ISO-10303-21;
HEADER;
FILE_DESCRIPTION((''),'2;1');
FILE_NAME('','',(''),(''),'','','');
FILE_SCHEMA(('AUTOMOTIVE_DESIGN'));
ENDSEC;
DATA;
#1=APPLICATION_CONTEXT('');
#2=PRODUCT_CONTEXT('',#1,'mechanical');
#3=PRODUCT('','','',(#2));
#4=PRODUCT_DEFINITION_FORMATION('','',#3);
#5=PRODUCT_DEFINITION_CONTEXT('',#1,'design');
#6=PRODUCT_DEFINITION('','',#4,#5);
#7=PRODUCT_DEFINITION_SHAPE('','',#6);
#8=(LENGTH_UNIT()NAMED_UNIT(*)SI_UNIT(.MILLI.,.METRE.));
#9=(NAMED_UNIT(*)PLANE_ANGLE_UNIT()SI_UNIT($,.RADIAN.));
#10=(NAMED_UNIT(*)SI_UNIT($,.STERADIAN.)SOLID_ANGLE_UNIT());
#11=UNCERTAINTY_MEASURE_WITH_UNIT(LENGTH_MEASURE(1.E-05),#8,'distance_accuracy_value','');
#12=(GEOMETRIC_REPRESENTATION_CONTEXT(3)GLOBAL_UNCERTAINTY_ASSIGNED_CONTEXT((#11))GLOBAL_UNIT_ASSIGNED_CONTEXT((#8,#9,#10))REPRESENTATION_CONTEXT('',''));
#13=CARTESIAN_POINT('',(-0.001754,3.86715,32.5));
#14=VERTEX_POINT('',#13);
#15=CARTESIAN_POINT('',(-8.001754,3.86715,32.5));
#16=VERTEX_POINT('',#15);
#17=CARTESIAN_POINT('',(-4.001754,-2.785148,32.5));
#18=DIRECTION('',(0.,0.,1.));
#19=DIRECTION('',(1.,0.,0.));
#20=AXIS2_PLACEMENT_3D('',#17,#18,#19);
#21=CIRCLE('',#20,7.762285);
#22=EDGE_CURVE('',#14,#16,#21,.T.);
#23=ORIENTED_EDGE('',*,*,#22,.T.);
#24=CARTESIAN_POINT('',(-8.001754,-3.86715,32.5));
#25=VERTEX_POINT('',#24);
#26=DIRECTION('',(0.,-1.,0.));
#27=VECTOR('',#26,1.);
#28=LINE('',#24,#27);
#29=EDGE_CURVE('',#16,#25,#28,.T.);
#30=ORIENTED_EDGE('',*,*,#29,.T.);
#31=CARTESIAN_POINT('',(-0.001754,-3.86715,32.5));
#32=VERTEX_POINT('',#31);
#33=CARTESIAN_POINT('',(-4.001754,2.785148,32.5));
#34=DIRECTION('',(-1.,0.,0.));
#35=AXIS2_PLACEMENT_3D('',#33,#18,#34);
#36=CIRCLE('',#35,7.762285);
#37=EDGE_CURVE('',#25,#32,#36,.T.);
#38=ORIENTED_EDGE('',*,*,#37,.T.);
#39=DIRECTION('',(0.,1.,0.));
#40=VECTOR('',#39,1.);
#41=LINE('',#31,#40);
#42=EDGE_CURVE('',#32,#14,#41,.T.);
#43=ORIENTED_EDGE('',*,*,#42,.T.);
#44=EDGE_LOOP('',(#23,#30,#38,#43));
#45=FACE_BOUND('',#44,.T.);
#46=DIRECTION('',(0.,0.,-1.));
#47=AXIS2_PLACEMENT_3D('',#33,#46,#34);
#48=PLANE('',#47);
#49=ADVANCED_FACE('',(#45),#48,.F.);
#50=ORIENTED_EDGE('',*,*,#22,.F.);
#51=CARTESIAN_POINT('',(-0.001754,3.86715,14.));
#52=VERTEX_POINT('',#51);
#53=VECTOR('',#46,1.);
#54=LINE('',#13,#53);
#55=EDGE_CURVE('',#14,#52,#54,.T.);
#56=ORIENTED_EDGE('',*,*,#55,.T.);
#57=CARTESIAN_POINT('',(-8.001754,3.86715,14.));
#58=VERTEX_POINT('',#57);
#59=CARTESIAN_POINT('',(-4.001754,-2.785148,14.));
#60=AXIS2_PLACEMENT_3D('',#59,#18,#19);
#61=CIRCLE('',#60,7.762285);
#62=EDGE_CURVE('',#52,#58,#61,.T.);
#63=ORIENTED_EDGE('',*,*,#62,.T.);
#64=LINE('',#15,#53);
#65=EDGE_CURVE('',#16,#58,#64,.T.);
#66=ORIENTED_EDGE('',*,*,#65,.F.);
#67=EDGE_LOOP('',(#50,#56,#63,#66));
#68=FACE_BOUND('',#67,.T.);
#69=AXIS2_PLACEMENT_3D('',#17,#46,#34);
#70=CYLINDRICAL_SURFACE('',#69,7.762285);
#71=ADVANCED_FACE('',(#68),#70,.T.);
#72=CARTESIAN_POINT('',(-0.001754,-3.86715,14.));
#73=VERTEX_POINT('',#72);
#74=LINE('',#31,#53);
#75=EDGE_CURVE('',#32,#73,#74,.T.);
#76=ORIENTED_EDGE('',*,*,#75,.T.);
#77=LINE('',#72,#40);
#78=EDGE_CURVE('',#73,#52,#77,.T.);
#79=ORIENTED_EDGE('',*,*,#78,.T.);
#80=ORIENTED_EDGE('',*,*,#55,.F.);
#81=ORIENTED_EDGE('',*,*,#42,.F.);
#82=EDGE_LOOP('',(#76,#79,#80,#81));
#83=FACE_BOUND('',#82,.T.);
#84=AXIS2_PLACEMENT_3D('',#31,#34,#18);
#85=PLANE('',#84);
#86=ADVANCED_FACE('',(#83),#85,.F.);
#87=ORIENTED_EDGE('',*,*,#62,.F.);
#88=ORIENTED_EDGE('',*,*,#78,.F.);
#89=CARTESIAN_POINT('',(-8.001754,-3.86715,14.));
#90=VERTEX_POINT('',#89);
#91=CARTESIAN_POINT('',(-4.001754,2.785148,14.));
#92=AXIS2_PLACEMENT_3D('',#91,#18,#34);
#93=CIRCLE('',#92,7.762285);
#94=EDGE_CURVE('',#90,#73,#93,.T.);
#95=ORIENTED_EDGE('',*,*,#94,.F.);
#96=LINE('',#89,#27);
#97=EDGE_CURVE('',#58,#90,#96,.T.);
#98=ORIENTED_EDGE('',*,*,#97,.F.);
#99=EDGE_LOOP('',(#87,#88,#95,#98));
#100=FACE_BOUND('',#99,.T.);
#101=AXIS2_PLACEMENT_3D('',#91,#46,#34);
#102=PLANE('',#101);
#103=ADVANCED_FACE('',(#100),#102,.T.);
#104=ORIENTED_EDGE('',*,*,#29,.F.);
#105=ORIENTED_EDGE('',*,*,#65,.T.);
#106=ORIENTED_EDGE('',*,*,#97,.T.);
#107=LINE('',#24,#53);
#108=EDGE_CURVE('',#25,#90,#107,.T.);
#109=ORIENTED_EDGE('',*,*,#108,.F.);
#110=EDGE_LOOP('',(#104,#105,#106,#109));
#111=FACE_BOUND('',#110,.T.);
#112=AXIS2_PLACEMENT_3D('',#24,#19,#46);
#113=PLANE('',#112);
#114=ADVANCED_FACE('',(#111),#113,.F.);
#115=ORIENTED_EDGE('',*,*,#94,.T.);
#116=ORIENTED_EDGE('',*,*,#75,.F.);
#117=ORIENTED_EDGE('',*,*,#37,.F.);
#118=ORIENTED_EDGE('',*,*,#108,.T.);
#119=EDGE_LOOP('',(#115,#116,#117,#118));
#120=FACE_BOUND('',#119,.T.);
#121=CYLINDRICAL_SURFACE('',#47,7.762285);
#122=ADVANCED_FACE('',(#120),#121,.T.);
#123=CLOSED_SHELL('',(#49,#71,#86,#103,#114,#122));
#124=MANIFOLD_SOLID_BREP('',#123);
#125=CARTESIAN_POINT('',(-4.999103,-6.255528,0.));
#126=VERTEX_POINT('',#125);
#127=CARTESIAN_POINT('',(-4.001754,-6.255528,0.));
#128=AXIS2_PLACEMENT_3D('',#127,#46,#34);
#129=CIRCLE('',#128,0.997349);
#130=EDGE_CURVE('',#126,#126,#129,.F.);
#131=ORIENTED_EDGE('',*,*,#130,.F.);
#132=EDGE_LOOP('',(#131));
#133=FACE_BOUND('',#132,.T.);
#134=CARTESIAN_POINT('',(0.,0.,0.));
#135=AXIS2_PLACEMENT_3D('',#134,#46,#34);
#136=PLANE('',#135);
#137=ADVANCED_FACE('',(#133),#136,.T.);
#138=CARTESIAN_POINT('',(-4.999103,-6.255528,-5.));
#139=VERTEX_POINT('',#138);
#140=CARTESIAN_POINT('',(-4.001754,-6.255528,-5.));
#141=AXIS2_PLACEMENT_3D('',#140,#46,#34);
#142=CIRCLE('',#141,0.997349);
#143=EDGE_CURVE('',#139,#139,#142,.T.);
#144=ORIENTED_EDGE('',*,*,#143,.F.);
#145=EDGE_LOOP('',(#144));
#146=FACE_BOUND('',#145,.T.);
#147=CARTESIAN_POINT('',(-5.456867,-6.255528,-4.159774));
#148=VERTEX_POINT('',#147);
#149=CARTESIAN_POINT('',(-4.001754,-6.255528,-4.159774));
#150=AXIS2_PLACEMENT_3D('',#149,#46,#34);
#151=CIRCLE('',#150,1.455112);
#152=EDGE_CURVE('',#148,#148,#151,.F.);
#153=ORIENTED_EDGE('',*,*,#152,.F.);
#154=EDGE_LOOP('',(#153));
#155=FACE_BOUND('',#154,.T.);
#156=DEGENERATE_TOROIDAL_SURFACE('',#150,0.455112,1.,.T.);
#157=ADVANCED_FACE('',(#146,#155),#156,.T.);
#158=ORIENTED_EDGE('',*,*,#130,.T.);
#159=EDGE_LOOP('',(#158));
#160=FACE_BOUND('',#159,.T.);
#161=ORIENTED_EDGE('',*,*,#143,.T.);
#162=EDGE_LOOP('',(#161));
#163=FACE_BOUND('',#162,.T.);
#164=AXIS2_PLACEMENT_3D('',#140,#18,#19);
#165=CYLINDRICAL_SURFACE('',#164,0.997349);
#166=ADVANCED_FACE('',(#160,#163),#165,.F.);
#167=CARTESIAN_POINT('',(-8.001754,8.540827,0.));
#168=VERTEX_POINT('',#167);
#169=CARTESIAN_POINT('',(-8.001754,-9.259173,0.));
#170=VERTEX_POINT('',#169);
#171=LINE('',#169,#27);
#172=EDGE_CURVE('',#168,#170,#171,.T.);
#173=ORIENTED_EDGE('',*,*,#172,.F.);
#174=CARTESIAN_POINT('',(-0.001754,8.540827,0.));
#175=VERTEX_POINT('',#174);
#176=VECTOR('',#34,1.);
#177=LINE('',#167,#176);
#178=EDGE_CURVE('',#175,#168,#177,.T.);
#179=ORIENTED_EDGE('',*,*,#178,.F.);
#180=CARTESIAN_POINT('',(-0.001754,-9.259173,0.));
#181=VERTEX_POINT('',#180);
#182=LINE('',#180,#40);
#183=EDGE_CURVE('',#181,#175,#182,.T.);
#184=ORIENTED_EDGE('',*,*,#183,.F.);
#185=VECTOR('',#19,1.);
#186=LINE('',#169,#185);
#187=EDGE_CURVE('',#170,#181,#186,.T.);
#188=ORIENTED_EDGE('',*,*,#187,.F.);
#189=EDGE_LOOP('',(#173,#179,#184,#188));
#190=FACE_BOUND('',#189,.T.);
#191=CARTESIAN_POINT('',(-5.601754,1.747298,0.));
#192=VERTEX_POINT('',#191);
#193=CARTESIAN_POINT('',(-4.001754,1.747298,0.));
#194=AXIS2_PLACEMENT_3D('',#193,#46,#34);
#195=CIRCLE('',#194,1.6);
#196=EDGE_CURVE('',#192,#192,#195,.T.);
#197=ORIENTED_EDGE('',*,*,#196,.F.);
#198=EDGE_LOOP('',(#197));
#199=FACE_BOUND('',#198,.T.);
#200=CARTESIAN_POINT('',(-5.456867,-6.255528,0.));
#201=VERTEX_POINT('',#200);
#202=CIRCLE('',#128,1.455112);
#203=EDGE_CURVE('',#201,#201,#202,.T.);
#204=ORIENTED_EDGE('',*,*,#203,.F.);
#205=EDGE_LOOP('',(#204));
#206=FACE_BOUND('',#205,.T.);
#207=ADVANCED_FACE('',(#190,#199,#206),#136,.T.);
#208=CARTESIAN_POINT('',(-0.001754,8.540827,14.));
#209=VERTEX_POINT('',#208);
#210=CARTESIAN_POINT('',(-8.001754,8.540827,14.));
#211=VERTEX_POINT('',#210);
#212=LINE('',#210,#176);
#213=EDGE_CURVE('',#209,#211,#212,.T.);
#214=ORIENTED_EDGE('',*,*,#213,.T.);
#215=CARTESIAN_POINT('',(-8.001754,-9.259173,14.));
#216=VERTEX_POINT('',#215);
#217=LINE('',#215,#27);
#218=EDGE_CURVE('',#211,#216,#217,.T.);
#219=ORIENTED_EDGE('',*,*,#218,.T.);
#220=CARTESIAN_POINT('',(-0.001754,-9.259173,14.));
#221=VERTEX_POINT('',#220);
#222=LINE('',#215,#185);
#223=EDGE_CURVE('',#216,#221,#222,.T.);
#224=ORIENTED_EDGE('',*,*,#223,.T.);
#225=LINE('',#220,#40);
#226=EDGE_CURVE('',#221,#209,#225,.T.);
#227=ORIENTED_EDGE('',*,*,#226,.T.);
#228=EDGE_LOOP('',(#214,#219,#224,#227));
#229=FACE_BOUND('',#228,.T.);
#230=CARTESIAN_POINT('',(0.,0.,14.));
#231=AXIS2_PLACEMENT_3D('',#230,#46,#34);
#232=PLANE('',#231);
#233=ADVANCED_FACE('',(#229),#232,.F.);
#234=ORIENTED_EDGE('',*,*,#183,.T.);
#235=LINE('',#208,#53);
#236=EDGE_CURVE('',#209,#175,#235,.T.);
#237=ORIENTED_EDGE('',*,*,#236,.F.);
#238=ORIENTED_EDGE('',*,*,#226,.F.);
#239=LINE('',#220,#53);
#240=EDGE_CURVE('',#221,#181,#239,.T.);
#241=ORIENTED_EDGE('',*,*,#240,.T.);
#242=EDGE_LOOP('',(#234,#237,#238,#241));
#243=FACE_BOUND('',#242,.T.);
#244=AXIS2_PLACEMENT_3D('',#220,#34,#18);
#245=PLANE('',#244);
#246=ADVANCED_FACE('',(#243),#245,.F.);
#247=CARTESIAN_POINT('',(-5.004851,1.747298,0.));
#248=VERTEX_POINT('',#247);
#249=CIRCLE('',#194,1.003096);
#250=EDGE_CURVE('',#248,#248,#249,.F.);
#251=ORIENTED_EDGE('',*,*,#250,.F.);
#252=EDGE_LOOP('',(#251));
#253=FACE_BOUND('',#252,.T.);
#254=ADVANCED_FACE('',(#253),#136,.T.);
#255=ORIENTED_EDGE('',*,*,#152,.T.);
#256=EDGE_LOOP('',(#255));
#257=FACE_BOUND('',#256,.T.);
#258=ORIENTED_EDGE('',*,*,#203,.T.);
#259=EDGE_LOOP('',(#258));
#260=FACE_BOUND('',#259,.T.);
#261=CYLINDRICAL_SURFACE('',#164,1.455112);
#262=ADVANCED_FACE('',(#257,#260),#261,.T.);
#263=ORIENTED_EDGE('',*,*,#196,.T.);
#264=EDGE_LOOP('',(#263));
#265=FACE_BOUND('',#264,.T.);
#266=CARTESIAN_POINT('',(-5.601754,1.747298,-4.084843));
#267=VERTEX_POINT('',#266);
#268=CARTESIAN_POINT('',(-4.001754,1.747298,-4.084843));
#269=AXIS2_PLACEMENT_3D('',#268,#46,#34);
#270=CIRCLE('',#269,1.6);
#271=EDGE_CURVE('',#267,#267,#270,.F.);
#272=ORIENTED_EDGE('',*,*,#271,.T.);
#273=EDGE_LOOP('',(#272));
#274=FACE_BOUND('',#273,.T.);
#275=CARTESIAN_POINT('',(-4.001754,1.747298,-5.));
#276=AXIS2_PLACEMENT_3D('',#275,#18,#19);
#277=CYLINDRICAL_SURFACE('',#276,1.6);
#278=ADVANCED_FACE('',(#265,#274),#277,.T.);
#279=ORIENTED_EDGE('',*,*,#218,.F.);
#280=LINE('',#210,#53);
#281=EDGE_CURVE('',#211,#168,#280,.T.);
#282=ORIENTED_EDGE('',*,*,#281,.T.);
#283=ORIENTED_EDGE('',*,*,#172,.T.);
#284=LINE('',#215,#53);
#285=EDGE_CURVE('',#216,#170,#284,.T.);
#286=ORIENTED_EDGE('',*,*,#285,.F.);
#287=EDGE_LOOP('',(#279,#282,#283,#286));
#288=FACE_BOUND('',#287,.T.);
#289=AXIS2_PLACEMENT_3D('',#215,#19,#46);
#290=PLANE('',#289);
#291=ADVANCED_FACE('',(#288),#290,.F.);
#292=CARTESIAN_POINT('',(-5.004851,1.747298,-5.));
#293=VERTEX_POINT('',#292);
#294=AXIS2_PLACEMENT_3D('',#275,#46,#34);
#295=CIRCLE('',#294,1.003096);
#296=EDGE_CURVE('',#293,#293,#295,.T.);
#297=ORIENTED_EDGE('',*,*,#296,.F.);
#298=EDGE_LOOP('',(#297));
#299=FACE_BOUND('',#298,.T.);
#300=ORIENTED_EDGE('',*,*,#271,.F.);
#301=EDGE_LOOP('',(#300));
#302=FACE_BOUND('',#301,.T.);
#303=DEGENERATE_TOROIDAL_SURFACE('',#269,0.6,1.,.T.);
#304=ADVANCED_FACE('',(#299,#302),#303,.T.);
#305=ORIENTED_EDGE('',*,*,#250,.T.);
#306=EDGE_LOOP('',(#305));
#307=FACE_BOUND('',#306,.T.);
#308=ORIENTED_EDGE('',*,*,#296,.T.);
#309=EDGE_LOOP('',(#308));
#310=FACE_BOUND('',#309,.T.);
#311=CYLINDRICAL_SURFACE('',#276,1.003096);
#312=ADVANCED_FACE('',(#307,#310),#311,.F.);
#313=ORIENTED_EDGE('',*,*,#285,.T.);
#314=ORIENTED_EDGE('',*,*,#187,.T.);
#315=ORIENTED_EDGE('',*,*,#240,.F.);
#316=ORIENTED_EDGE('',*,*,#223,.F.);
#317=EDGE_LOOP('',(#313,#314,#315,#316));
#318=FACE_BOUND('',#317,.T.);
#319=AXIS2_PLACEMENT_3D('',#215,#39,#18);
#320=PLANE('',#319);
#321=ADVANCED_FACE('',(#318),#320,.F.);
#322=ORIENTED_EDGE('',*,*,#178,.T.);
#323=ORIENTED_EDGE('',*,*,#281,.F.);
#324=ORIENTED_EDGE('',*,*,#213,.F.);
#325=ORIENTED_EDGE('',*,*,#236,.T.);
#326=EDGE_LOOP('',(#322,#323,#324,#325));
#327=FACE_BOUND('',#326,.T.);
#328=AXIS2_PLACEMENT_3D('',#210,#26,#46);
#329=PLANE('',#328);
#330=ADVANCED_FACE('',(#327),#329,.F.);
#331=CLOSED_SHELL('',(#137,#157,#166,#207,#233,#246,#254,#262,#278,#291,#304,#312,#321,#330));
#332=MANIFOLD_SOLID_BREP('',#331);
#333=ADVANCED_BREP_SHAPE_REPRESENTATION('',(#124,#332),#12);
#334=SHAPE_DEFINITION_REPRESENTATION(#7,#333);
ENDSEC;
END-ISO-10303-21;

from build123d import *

# Parameters (mm, degrees)
SKETCH1_W           = 8
SKETCH1_H           = 17.8
BOSS_EXTRUDE1_DEPTH = 14
BOSS_EXTRUDE2_DEPTH = 18.5
SKETCH3_R           = 1.455112434
SKETCH3_R_2         = 0.997349366
SKETCH3_R_3         = 1.6
SKETCH3_R_4         = 1.003096482
BOSS_EXTRUDE3_DEPTH = 5
FILLET1_R           = 1


with BuildPart() as part:
    # Sketch1 → Boss-Extrude1 (new body)
    with BuildSketch(Plane.XY):
        with Locations((-4.001754105, -0.359172607)):
            Rectangle(SKETCH1_W, SKETCH1_H)
    extrude(amount=BOSS_EXTRUDE1_DEPTH)

    # Sketch3 → Boss-Extrude3 (add)
    # profile 1 of 2: a face of its own
    with BuildSketch(Plane(origin=(0, 0, 0), x_dir=(-1, 0, 0), z_dir=(0, 0, -1))):
        with Locations((4.001754105, -6.25552787)):
            Circle(SKETCH3_R)
        with Locations((4.001754105, -6.25552787)):
            Circle(SKETCH3_R_2, mode=Mode.SUBTRACT)
    # profile 2 of 2: a face of its own
    with BuildSketch(Plane(origin=(0, 0, 0), x_dir=(-1, 0, 0), z_dir=(0, 0, -1))):
        with Locations((4.001754105, 1.747298107)):
            Circle(SKETCH3_R_3)
        with Locations((4.001754105, 1.747298107)):
            Circle(SKETCH3_R_4, mode=Mode.SUBTRACT)
    extrude(amount=BOSS_EXTRUDE3_DEPTH)

    # Fillet1
    # the kernel refuses this fillet: 1 mm, written as the material it takes off along each edge
    with BuildSketch(Plane(origin=(-4.001754105, -6.25552787, -5), x_dir=(-1, 0, 0), z_dir=(0, -1, 0))) as fillet1_piece_1:
        with BuildLine():
            CenterArc((0.455112434, -0.84022563), FILLET1_R, 0, 57.163953249)
            Line((0.997349366, 0), (1.008194105, 0.016804513))
            ThreePointArc((1.008194105, 0.016804513), (1.2262309, 0.02), (1.455112434, 0.02))
            Line((1.455112434, 0.02), (1.475112434, 0))
            Line((1.475112434, 0), (1.475112434, -0.84022563))
            Line((1.475112434, -0.84022563), (1.455112434, -0.84022563))
        make_face()
    revolve(axis=Axis((-4.001754105, -6.25552787, -5), (0, 0, -1)), mode=Mode.SUBTRACT)
    with BuildSketch(Plane(origin=(-4.001754105, 1.747298107, -5), x_dir=(-1, 0, 0), z_dir=(0, -1, 0))) as fillet1_piece_2:
        with BuildLine():
            CenterArc((0.6, -0.915157487), FILLET1_R, 0, 66.22810219)
            Line((1.003096482, 0), (1.011158412, 0.01830315))
            ThreePointArc((1.011158412, 0.01830315), (1.301548241, 0.02), (1.6, 0.02))
            Line((1.6, 0.02), (1.62, 0))
            Line((1.62, 0), (1.62, -0.915157487))
            Line((1.62, -0.915157487), (1.6, -0.915157487))
        make_face()
    revolve(axis=Axis((-4.001754105, 1.747298107, -5), (0, 0, -1)), mode=Mode.SUBTRACT)


with BuildPart() as body_2:
    # Sketch2 → Boss-Extrude2 (new body)
    with BuildSketch(Plane.XY.offset(14)):
        with BuildLine():
            Line((-8.001754105, -3.867150267), (-8.001754105, 3.867150267))
            ThreePointArc((-8.001754105, 3.867150267), (-4.001754105, 4.977137227), (-0.001754105, 3.867150267))
            Line((-0.001754105, 3.867150267), (-0.001754105, -3.867150267))
            ThreePointArc((-0.001754105, -3.867150267), (-4.001754105, -4.977137227), (-8.001754105, -3.867150267))
        make_face()
    extrude(amount=BOSS_EXTRUDE2_DEPTH)


solid = Compound([part.part, body_2.part])
